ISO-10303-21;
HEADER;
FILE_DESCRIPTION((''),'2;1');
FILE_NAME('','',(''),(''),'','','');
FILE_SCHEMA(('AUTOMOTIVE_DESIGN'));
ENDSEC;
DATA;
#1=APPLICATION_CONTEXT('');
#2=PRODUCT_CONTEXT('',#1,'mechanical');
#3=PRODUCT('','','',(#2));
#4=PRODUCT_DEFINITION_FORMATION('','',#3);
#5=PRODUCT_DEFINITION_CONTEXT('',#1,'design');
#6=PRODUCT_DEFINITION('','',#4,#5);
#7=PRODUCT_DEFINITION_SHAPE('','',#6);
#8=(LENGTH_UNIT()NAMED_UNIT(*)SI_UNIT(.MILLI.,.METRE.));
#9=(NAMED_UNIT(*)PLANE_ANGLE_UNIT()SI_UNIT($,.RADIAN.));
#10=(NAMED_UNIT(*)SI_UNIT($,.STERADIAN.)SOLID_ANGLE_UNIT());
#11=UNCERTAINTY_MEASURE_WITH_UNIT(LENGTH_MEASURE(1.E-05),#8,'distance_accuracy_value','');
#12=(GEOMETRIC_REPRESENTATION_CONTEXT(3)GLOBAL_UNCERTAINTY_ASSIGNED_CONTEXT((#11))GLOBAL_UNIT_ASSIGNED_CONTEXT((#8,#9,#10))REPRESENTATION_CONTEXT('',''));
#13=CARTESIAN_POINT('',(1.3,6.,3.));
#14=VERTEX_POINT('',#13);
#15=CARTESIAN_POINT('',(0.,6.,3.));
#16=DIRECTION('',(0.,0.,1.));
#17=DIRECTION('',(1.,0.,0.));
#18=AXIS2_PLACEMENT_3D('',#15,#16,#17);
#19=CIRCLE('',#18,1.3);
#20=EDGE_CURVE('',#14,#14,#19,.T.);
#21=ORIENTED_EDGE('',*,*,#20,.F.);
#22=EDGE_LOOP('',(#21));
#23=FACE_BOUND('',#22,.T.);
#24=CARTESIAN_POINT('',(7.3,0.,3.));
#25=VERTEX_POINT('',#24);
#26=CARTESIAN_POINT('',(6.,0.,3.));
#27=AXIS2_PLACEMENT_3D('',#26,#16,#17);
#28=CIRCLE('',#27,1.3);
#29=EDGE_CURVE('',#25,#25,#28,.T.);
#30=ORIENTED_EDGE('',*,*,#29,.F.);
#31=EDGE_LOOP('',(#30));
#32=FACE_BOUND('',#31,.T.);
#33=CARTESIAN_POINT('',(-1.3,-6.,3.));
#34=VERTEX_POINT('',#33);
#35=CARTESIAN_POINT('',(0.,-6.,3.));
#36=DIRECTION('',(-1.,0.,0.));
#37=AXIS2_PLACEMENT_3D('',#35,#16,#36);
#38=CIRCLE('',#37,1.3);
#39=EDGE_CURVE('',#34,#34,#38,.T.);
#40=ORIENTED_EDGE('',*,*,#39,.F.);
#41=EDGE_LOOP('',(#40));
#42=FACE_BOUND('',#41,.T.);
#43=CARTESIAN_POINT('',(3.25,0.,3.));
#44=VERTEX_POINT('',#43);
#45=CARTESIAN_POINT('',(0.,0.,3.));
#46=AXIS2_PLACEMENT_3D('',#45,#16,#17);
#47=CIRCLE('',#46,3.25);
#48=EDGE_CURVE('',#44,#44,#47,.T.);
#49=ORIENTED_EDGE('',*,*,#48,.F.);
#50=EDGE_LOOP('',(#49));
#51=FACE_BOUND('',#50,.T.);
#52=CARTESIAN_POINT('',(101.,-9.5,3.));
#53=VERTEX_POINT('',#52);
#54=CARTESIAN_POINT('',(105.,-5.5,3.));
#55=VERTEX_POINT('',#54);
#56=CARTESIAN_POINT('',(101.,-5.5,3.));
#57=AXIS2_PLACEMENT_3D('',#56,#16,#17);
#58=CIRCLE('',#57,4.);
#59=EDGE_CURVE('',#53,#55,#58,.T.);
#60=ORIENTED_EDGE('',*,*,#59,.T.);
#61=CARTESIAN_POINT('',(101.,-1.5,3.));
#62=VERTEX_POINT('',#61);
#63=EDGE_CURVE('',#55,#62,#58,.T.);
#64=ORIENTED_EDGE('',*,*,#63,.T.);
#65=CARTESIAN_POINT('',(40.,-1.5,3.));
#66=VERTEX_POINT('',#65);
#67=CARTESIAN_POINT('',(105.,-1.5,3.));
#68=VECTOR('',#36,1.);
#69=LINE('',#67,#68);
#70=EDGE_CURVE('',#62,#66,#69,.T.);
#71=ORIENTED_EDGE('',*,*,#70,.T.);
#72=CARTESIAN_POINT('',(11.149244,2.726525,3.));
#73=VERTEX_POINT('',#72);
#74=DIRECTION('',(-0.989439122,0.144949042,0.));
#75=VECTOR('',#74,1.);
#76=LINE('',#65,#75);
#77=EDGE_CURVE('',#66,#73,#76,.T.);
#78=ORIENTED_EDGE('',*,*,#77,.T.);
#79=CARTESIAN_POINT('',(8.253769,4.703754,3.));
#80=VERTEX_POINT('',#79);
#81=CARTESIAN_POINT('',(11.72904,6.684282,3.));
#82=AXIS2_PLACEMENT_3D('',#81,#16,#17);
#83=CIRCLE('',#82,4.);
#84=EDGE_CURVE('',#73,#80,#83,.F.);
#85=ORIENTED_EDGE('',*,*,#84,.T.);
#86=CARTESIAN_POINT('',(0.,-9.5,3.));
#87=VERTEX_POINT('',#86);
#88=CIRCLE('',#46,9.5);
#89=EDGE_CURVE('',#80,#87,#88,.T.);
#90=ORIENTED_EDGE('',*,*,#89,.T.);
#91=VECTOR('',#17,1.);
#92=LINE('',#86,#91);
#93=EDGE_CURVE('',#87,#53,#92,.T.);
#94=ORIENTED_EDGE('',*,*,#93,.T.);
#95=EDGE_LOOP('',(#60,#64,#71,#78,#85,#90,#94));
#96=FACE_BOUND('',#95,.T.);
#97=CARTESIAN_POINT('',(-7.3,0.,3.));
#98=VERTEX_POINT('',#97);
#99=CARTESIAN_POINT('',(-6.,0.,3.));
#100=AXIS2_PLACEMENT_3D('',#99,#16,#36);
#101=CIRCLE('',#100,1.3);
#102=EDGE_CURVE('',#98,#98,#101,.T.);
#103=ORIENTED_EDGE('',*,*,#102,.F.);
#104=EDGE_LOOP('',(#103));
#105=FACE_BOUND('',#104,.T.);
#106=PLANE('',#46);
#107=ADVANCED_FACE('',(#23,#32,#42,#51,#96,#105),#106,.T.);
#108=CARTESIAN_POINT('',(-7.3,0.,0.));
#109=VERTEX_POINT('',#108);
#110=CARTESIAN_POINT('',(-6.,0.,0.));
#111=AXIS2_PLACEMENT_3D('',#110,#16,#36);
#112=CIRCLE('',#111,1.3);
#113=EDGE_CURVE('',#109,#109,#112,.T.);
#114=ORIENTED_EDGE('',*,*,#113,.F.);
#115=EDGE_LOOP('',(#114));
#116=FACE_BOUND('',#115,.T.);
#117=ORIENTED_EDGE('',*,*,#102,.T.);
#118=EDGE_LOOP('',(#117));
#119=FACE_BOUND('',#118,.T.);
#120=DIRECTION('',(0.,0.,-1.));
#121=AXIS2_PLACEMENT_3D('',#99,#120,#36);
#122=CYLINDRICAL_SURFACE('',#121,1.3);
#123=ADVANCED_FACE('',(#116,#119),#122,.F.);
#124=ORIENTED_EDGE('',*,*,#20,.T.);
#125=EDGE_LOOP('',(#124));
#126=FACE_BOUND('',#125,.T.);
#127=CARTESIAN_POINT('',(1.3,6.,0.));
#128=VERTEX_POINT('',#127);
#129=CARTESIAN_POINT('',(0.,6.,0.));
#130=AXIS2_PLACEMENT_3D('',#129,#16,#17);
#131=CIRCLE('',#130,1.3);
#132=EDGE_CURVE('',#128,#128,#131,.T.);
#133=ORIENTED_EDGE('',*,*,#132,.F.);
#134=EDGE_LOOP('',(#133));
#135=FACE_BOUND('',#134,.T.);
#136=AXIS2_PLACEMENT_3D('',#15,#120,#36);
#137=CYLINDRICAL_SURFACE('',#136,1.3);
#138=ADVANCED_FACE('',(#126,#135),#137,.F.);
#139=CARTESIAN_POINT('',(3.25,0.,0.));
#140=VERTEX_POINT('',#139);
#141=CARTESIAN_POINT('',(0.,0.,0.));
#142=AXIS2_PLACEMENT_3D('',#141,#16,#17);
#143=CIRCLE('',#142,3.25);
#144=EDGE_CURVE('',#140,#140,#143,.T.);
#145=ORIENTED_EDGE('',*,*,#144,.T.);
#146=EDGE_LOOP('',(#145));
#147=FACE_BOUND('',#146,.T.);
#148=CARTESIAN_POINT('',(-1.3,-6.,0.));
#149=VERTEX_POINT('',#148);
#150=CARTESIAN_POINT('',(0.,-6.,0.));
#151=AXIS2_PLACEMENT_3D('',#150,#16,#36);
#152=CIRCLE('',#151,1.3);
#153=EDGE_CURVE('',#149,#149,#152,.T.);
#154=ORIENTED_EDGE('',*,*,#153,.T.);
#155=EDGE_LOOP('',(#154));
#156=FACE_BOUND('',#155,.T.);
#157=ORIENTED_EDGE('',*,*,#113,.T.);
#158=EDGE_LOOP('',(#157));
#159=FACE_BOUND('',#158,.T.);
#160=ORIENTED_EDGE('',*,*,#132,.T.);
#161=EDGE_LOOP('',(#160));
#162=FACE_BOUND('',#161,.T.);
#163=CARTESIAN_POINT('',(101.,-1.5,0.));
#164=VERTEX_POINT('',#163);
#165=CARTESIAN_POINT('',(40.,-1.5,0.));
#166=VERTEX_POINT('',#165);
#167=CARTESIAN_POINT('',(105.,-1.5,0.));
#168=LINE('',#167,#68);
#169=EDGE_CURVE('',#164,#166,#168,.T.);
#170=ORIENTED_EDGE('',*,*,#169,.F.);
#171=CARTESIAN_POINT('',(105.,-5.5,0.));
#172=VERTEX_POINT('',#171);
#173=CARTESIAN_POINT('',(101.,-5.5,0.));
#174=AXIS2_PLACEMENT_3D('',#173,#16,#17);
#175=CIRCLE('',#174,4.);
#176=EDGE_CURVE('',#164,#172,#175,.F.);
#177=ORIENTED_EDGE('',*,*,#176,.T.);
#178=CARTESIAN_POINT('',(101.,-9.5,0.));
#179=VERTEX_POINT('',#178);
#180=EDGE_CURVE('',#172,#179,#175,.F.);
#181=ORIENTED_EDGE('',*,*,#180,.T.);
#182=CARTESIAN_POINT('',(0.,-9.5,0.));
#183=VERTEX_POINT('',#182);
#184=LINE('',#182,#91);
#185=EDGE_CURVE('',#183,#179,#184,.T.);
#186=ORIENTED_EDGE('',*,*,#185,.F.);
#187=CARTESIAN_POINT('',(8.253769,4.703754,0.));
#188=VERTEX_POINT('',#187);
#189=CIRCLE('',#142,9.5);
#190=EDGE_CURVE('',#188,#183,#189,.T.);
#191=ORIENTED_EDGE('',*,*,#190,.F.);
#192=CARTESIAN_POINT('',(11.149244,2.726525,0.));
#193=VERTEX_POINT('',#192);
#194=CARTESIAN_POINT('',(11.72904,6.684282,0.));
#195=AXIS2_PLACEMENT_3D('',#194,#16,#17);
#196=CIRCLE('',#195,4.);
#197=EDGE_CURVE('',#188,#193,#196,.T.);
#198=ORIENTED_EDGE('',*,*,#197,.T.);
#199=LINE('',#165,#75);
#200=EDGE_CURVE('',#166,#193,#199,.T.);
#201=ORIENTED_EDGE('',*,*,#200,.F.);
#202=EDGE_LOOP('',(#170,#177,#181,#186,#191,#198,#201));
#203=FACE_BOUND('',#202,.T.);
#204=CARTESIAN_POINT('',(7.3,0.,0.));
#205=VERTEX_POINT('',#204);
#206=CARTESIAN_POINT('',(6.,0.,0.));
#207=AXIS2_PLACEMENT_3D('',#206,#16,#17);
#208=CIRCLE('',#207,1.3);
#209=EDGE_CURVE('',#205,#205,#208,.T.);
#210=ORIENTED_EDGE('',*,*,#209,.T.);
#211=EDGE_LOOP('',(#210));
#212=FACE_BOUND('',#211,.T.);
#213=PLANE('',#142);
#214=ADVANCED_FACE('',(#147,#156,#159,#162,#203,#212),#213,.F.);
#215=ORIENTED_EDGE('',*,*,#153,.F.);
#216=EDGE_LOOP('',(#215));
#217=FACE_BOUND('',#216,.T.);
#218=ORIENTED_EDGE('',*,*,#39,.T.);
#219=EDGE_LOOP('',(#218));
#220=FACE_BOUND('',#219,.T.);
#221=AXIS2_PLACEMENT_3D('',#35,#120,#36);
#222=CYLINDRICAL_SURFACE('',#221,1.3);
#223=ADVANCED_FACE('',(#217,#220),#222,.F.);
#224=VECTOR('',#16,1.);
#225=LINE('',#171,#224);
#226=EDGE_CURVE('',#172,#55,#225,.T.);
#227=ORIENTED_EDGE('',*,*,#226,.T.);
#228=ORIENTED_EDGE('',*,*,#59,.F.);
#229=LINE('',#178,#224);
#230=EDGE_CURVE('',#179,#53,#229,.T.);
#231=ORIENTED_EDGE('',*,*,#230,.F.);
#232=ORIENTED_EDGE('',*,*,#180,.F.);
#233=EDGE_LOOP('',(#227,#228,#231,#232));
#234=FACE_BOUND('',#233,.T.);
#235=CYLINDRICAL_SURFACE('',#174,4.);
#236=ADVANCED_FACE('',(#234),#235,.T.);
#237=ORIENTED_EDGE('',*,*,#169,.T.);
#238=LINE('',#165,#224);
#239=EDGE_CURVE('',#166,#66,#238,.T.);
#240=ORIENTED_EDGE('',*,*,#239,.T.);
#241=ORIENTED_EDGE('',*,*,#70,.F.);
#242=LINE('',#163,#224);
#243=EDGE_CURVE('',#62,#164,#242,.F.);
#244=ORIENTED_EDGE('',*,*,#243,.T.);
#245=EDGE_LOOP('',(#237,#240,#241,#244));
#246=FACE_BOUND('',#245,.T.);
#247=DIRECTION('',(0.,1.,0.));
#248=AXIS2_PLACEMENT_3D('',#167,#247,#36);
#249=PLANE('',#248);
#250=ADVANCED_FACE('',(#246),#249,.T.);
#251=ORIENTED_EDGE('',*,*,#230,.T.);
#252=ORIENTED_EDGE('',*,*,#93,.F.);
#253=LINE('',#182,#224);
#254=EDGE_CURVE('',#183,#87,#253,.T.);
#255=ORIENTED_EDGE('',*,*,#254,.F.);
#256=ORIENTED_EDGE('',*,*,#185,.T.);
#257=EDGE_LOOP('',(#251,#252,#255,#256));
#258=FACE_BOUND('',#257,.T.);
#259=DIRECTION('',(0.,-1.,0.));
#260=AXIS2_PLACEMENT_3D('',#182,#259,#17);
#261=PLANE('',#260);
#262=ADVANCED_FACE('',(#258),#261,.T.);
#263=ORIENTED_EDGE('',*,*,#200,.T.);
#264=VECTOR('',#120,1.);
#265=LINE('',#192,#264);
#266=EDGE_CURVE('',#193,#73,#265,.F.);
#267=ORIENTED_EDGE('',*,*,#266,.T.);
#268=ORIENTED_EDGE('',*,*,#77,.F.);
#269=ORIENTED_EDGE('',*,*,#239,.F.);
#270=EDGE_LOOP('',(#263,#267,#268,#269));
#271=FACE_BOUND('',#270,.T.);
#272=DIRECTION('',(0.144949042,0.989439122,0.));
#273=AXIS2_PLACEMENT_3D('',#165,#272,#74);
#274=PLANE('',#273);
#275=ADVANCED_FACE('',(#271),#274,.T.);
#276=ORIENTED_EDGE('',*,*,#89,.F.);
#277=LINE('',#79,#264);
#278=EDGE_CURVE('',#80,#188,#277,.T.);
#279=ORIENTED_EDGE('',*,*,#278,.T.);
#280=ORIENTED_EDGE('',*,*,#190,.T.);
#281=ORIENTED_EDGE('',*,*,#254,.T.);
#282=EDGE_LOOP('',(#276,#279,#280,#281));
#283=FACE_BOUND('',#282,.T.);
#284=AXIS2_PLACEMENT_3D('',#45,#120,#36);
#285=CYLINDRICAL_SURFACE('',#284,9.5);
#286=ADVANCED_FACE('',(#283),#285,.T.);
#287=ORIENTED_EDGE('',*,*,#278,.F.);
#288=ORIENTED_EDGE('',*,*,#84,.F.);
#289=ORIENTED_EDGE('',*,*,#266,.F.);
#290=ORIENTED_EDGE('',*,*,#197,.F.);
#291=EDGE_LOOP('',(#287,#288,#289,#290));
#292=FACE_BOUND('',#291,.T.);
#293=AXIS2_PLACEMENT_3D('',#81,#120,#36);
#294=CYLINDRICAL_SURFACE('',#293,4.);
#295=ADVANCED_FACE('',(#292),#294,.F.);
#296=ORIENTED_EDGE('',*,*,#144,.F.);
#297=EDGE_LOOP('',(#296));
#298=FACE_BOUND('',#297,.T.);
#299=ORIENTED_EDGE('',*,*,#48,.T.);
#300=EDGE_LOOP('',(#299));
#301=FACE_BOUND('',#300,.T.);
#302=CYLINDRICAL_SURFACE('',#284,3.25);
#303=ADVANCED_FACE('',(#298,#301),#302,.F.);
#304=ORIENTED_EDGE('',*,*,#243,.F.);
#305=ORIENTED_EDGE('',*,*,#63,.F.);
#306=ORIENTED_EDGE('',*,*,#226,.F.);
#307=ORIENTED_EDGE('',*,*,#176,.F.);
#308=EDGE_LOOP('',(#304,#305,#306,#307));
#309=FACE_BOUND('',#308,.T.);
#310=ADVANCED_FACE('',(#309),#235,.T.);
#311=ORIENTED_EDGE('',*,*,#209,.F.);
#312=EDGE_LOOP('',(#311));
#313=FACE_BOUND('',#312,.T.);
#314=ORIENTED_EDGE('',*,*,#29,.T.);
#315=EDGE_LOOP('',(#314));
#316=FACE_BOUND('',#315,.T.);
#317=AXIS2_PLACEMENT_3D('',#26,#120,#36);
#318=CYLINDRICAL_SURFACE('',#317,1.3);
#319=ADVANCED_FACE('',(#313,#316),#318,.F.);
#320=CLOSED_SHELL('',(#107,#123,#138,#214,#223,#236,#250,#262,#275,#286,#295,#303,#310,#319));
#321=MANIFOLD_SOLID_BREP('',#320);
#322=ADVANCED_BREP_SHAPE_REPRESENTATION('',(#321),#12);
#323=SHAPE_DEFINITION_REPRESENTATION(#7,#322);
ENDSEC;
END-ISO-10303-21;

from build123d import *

# Parameters (mm, degrees)
ESQUISSE1_R        = 9.5
ESQUISSE1_R_2      = 1.3
ESQUISSE1_R_3      = 3.25
BOSS_EXTRU_1_DEPTH = 3
BOSS_EXTRU_2_DEPTH = 3
ESQUISSE3_W        = 65
ESQUISSE3_H        = 8
BOSS_EXTRU_3_DEPTH = 3
CONG_1_R           = 4


with BuildPart() as part:
    # Esquisse1 → Boss.-Extru.1 (new body)
    with BuildSketch(Plane.XY):
        Circle(ESQUISSE1_R)
        with Locations((6, 0)):
            Circle(ESQUISSE1_R_2, mode=Mode.SUBTRACT)
        with Locations((0, 6)):
            Circle(ESQUISSE1_R_2, mode=Mode.SUBTRACT)
        with Locations(Location((-6, 0, 0), (0, 0, 180))):
            Circle(ESQUISSE1_R_2, mode=Mode.SUBTRACT)
        with Locations(Location((0, -6, 0), (0, 0, 180))):
            Circle(ESQUISSE1_R_2, mode=Mode.SUBTRACT)
        Circle(ESQUISSE1_R_3, mode=Mode.SUBTRACT)
    extrude(amount=BOSS_EXTRU_1_DEPTH)

    # Esquisse2 → Boss.-Extru.2 (add)
    with BuildSketch(Plane.XY.offset(3)):
        Polygon((0, -9.5), (40, -9.5), (40, -1.5), (9, 3.041381265), (9, -0.5), align=None)
    extrude(amount=-BOSS_EXTRU_2_DEPTH)

    # Esquisse3 → Boss.-Extru.3 (add)
    with BuildSketch(Plane.XY.offset(3)):
        with Locations((72.5, -5.5)):
            Rectangle(ESQUISSE3_W, ESQUISSE3_H)
    extrude(amount=-BOSS_EXTRU_3_DEPTH)

    # Congé1
    cong_1_edges = [part.edges().sort_by_distance(p)[0] for p in [
        (9, 3.041381265, 1.5),
        (105, -9.5, 1.5),
        (105, -1.5, 1.5),
    ]]
    fillet(cong_1_edges, radius=CONG_1_R - 0.0001)  # a hair under: the kernel refuses the full size


solid = part.part
